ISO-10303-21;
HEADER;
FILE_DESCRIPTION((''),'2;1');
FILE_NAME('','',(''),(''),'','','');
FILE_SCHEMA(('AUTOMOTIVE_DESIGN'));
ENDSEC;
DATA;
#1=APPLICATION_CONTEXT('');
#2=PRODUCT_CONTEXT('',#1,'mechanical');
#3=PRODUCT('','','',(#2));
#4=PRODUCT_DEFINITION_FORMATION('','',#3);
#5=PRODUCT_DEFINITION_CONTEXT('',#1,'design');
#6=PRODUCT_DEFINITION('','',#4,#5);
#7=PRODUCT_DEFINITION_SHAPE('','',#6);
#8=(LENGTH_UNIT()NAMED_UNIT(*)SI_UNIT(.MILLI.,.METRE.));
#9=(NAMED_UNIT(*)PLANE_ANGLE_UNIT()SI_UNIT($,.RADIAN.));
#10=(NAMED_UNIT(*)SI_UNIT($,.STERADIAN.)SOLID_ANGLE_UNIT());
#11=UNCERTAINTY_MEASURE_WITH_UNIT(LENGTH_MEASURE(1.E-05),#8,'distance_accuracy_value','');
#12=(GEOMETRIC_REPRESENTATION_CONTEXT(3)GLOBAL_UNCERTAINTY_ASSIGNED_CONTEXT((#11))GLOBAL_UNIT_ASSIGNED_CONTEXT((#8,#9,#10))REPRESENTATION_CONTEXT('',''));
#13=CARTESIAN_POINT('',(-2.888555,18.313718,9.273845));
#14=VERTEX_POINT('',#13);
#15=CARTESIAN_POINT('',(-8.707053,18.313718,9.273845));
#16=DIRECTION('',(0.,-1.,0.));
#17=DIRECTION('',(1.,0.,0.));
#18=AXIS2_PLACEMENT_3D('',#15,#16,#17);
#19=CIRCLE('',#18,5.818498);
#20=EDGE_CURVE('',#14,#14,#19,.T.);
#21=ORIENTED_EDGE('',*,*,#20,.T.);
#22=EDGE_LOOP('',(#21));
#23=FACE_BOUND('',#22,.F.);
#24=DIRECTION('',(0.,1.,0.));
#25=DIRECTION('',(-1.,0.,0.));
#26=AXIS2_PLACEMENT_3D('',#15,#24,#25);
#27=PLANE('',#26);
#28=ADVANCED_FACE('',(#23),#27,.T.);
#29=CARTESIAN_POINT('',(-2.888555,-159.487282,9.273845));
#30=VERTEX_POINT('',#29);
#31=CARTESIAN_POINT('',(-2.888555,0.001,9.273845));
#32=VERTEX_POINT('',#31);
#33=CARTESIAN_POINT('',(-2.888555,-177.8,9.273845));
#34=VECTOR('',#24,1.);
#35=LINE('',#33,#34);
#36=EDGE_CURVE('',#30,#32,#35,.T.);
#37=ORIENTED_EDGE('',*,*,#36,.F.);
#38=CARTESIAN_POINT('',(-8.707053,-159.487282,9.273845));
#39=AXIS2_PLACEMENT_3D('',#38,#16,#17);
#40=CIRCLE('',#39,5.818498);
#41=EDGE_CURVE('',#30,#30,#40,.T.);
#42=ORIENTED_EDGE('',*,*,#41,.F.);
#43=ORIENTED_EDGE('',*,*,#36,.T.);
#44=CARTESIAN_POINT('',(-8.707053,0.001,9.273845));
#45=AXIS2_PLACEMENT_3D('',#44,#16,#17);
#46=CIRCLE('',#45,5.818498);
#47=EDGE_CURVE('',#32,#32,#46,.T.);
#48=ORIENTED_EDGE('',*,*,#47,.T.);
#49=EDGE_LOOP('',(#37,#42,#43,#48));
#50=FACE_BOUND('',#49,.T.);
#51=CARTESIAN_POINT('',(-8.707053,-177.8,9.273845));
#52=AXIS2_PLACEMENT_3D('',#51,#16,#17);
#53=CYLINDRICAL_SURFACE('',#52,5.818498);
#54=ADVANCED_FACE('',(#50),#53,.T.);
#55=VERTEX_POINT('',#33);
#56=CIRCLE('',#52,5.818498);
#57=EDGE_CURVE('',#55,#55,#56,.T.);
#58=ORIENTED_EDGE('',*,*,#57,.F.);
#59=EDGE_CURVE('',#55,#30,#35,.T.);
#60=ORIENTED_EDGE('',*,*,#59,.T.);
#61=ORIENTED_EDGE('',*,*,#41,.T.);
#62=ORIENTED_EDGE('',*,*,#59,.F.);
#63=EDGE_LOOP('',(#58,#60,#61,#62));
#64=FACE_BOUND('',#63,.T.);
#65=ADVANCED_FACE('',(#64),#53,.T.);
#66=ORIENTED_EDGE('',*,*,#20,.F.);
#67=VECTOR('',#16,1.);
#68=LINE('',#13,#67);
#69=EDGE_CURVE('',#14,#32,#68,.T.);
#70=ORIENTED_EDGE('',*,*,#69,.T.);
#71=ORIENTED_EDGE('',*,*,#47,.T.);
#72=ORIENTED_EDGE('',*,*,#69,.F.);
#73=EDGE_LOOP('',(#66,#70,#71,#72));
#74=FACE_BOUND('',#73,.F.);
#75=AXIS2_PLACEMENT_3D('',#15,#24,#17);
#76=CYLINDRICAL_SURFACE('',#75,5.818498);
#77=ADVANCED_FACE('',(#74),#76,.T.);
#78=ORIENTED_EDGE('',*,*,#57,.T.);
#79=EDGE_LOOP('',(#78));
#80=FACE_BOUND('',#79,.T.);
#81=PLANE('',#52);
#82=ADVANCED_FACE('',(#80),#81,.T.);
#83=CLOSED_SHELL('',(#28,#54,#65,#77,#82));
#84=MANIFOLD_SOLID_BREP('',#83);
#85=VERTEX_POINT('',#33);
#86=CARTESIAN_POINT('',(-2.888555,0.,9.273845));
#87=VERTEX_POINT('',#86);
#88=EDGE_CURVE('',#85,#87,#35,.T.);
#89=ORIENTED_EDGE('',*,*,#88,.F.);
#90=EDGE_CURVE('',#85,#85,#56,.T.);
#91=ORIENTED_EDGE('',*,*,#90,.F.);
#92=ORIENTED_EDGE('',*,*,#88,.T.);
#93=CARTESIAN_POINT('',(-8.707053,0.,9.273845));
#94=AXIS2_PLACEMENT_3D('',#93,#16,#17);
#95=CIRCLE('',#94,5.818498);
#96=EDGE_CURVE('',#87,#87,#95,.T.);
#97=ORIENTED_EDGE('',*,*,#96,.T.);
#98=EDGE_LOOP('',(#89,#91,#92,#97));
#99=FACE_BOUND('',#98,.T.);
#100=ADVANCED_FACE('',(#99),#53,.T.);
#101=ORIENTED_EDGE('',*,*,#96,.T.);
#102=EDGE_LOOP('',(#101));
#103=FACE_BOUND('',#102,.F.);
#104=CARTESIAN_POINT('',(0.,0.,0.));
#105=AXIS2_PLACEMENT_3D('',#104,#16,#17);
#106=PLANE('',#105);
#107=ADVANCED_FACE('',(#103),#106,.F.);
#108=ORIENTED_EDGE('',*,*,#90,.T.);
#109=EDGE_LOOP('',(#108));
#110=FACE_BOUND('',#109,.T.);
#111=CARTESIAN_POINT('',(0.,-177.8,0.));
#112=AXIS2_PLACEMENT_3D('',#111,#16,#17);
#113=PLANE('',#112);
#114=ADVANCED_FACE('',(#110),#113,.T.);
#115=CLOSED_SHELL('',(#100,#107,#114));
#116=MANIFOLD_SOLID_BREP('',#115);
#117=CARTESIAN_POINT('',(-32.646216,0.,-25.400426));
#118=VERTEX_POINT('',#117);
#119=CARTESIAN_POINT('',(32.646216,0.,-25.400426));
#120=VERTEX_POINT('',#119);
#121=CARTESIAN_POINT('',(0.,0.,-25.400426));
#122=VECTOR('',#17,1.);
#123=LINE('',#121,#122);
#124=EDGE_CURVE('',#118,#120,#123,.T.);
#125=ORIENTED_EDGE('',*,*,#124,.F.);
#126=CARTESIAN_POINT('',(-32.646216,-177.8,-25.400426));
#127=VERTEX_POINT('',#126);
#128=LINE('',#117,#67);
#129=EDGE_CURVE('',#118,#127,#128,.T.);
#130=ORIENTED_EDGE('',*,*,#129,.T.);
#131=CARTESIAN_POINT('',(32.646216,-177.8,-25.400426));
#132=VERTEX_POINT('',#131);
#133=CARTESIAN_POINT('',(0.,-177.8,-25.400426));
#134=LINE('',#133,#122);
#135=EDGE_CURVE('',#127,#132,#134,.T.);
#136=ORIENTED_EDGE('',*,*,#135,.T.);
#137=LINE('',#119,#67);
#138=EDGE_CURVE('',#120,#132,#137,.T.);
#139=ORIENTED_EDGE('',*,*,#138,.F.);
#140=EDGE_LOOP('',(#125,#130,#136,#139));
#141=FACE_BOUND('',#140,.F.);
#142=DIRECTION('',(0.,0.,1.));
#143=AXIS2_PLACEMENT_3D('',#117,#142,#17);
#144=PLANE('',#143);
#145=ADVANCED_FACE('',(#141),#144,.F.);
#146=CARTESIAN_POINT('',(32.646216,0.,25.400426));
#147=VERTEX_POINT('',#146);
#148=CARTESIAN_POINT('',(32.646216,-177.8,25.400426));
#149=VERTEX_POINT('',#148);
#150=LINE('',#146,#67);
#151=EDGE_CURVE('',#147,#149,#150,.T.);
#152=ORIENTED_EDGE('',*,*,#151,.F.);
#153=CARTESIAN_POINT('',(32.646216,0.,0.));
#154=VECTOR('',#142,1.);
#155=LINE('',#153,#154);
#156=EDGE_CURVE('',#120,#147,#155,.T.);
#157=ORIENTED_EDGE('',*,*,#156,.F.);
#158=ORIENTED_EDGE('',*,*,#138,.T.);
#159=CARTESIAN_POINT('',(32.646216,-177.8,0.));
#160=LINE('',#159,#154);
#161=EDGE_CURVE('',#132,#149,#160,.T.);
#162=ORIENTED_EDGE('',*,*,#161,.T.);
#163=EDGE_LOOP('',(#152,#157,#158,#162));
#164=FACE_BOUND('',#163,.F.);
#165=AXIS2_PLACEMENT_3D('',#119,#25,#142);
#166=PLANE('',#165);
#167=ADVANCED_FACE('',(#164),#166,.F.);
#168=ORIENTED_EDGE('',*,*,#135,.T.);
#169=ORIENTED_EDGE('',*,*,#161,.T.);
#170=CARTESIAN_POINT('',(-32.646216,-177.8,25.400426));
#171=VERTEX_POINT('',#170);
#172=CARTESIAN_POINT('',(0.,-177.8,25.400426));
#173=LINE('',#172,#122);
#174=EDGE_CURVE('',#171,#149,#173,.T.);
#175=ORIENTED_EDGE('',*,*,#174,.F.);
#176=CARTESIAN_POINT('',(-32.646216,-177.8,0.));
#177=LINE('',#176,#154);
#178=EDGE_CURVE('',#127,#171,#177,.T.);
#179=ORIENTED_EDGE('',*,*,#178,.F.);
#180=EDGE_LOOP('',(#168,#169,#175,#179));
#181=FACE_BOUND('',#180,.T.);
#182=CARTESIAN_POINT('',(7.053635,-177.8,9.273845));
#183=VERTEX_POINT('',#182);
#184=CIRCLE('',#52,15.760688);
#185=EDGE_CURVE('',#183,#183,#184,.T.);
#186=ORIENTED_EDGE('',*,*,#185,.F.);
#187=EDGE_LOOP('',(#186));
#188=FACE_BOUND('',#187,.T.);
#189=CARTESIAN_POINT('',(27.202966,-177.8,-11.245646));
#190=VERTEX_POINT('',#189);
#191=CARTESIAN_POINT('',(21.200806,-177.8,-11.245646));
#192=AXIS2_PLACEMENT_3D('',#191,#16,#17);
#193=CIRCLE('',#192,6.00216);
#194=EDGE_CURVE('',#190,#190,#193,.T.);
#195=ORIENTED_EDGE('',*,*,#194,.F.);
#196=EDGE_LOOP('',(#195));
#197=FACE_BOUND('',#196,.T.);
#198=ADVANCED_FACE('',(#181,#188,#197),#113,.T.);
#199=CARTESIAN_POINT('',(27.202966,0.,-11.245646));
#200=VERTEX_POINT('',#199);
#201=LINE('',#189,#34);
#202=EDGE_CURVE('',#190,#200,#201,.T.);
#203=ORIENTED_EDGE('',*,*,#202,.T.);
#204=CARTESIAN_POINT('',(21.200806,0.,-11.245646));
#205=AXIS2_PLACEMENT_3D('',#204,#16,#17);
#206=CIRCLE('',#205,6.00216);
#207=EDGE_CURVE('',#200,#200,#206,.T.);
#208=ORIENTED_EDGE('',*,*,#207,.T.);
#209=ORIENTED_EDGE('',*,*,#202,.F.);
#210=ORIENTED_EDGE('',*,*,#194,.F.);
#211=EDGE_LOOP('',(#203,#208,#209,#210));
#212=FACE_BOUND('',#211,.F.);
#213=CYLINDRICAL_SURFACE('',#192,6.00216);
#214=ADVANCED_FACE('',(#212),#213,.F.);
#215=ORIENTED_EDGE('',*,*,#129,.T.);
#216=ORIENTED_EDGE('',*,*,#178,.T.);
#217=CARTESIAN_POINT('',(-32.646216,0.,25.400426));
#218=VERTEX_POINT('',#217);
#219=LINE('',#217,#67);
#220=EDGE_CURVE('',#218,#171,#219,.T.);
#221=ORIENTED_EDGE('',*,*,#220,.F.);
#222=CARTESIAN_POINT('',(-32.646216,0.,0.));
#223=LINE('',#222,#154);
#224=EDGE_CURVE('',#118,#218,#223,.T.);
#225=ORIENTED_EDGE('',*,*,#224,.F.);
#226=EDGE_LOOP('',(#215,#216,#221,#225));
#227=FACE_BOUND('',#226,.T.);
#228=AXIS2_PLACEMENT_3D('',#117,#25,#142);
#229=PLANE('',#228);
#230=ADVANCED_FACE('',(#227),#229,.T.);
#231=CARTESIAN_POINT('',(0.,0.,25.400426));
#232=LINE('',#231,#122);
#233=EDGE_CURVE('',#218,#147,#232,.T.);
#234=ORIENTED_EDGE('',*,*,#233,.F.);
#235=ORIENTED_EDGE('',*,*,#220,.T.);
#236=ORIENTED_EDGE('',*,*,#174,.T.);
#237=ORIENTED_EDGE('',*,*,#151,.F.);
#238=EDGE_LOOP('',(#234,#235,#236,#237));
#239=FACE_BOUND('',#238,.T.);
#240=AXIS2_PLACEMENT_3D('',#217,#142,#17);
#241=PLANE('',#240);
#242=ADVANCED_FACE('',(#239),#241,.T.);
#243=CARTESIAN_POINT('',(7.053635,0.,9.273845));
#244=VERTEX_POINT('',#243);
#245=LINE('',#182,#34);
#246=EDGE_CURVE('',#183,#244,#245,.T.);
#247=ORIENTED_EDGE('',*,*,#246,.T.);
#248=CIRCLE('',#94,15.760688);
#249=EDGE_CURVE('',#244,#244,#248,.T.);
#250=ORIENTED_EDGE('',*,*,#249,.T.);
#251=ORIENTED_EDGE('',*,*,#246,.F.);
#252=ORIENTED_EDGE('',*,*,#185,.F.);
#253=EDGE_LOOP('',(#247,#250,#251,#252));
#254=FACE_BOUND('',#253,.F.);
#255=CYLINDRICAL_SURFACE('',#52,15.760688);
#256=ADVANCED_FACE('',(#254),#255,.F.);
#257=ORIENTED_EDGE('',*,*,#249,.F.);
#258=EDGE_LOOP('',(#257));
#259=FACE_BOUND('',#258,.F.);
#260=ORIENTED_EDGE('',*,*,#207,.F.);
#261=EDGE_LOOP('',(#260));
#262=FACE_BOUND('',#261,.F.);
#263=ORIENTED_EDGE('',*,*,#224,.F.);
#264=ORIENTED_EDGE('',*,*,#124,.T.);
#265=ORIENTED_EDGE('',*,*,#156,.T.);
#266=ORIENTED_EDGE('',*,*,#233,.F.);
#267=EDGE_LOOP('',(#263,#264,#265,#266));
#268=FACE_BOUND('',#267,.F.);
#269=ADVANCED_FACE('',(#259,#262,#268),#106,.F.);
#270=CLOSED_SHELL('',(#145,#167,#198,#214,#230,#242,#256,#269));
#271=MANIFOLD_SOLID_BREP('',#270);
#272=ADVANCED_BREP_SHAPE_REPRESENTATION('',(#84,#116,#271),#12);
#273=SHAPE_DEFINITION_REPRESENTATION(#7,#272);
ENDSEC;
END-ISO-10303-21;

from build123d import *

# Parameters (mm, degrees)
F0_W     = 65.2924329042
F0_H     = 50.8008524776
F0_W_2   = 20.2902685851
F0_H_2   = 12.3683428392
F1_DEPTH = 177.8
F2_R     = 5.8184975352
F3_DEPTH = 177.801
F2_R_2   = 15.7606877534
F2_R_3   = 6.0021596397
F4_DEPTH = 196.114718


# Not quite as in the source:
# - a pattern or mirror of a feature is missing from the dataset's text; its kind, count and spacing are read off the source's solid


with BuildPart() as f1:
    # F0 (on Front) → F1 (new body)
    with BuildSketch(Plane.XZ):
        Rectangle(F0_W, F0_H)
        Rectangle(F0_W_2, F0_H_2, mode=Mode.SUBTRACT)
        Rectangle(F0_W_2, F0_H_2)
    extrude(amount=F1_DEPTH)

    # F2 (on face) → F4 (cut, through all)
    with BuildSketch(Plane.XZ.offset(177.8)):
        with Locations((-8.707053028, 9.2738447711)):
            Circle(F2_R_2)
        with Locations((-8.707053028, 9.2738447711)):
            Circle(F2_R, mode=Mode.SUBTRACT)
        with Locations((21.2008059025, -11.2456455827)):
            Circle(F2_R_3)
    extrude(amount=-F4_DEPTH, mode=Mode.SUBTRACT)


with BuildPart() as f3:
    # F2 (on face) → F3 (new body, through all)
    with BuildSketch(Plane.XZ.offset(177.8)):
        with Locations((-8.707053028, 9.2738447711)):
            Circle(F2_R)
    extrude(amount=-F3_DEPTH)

    # F3_copies: F3 across plane


with BuildPart() as f3_1:
    add(f3.part)
    add(f3.part.mirror(Plane.ZX.offset(-79.743141)))


solid = Compound([f1.part, f3_1.part])
